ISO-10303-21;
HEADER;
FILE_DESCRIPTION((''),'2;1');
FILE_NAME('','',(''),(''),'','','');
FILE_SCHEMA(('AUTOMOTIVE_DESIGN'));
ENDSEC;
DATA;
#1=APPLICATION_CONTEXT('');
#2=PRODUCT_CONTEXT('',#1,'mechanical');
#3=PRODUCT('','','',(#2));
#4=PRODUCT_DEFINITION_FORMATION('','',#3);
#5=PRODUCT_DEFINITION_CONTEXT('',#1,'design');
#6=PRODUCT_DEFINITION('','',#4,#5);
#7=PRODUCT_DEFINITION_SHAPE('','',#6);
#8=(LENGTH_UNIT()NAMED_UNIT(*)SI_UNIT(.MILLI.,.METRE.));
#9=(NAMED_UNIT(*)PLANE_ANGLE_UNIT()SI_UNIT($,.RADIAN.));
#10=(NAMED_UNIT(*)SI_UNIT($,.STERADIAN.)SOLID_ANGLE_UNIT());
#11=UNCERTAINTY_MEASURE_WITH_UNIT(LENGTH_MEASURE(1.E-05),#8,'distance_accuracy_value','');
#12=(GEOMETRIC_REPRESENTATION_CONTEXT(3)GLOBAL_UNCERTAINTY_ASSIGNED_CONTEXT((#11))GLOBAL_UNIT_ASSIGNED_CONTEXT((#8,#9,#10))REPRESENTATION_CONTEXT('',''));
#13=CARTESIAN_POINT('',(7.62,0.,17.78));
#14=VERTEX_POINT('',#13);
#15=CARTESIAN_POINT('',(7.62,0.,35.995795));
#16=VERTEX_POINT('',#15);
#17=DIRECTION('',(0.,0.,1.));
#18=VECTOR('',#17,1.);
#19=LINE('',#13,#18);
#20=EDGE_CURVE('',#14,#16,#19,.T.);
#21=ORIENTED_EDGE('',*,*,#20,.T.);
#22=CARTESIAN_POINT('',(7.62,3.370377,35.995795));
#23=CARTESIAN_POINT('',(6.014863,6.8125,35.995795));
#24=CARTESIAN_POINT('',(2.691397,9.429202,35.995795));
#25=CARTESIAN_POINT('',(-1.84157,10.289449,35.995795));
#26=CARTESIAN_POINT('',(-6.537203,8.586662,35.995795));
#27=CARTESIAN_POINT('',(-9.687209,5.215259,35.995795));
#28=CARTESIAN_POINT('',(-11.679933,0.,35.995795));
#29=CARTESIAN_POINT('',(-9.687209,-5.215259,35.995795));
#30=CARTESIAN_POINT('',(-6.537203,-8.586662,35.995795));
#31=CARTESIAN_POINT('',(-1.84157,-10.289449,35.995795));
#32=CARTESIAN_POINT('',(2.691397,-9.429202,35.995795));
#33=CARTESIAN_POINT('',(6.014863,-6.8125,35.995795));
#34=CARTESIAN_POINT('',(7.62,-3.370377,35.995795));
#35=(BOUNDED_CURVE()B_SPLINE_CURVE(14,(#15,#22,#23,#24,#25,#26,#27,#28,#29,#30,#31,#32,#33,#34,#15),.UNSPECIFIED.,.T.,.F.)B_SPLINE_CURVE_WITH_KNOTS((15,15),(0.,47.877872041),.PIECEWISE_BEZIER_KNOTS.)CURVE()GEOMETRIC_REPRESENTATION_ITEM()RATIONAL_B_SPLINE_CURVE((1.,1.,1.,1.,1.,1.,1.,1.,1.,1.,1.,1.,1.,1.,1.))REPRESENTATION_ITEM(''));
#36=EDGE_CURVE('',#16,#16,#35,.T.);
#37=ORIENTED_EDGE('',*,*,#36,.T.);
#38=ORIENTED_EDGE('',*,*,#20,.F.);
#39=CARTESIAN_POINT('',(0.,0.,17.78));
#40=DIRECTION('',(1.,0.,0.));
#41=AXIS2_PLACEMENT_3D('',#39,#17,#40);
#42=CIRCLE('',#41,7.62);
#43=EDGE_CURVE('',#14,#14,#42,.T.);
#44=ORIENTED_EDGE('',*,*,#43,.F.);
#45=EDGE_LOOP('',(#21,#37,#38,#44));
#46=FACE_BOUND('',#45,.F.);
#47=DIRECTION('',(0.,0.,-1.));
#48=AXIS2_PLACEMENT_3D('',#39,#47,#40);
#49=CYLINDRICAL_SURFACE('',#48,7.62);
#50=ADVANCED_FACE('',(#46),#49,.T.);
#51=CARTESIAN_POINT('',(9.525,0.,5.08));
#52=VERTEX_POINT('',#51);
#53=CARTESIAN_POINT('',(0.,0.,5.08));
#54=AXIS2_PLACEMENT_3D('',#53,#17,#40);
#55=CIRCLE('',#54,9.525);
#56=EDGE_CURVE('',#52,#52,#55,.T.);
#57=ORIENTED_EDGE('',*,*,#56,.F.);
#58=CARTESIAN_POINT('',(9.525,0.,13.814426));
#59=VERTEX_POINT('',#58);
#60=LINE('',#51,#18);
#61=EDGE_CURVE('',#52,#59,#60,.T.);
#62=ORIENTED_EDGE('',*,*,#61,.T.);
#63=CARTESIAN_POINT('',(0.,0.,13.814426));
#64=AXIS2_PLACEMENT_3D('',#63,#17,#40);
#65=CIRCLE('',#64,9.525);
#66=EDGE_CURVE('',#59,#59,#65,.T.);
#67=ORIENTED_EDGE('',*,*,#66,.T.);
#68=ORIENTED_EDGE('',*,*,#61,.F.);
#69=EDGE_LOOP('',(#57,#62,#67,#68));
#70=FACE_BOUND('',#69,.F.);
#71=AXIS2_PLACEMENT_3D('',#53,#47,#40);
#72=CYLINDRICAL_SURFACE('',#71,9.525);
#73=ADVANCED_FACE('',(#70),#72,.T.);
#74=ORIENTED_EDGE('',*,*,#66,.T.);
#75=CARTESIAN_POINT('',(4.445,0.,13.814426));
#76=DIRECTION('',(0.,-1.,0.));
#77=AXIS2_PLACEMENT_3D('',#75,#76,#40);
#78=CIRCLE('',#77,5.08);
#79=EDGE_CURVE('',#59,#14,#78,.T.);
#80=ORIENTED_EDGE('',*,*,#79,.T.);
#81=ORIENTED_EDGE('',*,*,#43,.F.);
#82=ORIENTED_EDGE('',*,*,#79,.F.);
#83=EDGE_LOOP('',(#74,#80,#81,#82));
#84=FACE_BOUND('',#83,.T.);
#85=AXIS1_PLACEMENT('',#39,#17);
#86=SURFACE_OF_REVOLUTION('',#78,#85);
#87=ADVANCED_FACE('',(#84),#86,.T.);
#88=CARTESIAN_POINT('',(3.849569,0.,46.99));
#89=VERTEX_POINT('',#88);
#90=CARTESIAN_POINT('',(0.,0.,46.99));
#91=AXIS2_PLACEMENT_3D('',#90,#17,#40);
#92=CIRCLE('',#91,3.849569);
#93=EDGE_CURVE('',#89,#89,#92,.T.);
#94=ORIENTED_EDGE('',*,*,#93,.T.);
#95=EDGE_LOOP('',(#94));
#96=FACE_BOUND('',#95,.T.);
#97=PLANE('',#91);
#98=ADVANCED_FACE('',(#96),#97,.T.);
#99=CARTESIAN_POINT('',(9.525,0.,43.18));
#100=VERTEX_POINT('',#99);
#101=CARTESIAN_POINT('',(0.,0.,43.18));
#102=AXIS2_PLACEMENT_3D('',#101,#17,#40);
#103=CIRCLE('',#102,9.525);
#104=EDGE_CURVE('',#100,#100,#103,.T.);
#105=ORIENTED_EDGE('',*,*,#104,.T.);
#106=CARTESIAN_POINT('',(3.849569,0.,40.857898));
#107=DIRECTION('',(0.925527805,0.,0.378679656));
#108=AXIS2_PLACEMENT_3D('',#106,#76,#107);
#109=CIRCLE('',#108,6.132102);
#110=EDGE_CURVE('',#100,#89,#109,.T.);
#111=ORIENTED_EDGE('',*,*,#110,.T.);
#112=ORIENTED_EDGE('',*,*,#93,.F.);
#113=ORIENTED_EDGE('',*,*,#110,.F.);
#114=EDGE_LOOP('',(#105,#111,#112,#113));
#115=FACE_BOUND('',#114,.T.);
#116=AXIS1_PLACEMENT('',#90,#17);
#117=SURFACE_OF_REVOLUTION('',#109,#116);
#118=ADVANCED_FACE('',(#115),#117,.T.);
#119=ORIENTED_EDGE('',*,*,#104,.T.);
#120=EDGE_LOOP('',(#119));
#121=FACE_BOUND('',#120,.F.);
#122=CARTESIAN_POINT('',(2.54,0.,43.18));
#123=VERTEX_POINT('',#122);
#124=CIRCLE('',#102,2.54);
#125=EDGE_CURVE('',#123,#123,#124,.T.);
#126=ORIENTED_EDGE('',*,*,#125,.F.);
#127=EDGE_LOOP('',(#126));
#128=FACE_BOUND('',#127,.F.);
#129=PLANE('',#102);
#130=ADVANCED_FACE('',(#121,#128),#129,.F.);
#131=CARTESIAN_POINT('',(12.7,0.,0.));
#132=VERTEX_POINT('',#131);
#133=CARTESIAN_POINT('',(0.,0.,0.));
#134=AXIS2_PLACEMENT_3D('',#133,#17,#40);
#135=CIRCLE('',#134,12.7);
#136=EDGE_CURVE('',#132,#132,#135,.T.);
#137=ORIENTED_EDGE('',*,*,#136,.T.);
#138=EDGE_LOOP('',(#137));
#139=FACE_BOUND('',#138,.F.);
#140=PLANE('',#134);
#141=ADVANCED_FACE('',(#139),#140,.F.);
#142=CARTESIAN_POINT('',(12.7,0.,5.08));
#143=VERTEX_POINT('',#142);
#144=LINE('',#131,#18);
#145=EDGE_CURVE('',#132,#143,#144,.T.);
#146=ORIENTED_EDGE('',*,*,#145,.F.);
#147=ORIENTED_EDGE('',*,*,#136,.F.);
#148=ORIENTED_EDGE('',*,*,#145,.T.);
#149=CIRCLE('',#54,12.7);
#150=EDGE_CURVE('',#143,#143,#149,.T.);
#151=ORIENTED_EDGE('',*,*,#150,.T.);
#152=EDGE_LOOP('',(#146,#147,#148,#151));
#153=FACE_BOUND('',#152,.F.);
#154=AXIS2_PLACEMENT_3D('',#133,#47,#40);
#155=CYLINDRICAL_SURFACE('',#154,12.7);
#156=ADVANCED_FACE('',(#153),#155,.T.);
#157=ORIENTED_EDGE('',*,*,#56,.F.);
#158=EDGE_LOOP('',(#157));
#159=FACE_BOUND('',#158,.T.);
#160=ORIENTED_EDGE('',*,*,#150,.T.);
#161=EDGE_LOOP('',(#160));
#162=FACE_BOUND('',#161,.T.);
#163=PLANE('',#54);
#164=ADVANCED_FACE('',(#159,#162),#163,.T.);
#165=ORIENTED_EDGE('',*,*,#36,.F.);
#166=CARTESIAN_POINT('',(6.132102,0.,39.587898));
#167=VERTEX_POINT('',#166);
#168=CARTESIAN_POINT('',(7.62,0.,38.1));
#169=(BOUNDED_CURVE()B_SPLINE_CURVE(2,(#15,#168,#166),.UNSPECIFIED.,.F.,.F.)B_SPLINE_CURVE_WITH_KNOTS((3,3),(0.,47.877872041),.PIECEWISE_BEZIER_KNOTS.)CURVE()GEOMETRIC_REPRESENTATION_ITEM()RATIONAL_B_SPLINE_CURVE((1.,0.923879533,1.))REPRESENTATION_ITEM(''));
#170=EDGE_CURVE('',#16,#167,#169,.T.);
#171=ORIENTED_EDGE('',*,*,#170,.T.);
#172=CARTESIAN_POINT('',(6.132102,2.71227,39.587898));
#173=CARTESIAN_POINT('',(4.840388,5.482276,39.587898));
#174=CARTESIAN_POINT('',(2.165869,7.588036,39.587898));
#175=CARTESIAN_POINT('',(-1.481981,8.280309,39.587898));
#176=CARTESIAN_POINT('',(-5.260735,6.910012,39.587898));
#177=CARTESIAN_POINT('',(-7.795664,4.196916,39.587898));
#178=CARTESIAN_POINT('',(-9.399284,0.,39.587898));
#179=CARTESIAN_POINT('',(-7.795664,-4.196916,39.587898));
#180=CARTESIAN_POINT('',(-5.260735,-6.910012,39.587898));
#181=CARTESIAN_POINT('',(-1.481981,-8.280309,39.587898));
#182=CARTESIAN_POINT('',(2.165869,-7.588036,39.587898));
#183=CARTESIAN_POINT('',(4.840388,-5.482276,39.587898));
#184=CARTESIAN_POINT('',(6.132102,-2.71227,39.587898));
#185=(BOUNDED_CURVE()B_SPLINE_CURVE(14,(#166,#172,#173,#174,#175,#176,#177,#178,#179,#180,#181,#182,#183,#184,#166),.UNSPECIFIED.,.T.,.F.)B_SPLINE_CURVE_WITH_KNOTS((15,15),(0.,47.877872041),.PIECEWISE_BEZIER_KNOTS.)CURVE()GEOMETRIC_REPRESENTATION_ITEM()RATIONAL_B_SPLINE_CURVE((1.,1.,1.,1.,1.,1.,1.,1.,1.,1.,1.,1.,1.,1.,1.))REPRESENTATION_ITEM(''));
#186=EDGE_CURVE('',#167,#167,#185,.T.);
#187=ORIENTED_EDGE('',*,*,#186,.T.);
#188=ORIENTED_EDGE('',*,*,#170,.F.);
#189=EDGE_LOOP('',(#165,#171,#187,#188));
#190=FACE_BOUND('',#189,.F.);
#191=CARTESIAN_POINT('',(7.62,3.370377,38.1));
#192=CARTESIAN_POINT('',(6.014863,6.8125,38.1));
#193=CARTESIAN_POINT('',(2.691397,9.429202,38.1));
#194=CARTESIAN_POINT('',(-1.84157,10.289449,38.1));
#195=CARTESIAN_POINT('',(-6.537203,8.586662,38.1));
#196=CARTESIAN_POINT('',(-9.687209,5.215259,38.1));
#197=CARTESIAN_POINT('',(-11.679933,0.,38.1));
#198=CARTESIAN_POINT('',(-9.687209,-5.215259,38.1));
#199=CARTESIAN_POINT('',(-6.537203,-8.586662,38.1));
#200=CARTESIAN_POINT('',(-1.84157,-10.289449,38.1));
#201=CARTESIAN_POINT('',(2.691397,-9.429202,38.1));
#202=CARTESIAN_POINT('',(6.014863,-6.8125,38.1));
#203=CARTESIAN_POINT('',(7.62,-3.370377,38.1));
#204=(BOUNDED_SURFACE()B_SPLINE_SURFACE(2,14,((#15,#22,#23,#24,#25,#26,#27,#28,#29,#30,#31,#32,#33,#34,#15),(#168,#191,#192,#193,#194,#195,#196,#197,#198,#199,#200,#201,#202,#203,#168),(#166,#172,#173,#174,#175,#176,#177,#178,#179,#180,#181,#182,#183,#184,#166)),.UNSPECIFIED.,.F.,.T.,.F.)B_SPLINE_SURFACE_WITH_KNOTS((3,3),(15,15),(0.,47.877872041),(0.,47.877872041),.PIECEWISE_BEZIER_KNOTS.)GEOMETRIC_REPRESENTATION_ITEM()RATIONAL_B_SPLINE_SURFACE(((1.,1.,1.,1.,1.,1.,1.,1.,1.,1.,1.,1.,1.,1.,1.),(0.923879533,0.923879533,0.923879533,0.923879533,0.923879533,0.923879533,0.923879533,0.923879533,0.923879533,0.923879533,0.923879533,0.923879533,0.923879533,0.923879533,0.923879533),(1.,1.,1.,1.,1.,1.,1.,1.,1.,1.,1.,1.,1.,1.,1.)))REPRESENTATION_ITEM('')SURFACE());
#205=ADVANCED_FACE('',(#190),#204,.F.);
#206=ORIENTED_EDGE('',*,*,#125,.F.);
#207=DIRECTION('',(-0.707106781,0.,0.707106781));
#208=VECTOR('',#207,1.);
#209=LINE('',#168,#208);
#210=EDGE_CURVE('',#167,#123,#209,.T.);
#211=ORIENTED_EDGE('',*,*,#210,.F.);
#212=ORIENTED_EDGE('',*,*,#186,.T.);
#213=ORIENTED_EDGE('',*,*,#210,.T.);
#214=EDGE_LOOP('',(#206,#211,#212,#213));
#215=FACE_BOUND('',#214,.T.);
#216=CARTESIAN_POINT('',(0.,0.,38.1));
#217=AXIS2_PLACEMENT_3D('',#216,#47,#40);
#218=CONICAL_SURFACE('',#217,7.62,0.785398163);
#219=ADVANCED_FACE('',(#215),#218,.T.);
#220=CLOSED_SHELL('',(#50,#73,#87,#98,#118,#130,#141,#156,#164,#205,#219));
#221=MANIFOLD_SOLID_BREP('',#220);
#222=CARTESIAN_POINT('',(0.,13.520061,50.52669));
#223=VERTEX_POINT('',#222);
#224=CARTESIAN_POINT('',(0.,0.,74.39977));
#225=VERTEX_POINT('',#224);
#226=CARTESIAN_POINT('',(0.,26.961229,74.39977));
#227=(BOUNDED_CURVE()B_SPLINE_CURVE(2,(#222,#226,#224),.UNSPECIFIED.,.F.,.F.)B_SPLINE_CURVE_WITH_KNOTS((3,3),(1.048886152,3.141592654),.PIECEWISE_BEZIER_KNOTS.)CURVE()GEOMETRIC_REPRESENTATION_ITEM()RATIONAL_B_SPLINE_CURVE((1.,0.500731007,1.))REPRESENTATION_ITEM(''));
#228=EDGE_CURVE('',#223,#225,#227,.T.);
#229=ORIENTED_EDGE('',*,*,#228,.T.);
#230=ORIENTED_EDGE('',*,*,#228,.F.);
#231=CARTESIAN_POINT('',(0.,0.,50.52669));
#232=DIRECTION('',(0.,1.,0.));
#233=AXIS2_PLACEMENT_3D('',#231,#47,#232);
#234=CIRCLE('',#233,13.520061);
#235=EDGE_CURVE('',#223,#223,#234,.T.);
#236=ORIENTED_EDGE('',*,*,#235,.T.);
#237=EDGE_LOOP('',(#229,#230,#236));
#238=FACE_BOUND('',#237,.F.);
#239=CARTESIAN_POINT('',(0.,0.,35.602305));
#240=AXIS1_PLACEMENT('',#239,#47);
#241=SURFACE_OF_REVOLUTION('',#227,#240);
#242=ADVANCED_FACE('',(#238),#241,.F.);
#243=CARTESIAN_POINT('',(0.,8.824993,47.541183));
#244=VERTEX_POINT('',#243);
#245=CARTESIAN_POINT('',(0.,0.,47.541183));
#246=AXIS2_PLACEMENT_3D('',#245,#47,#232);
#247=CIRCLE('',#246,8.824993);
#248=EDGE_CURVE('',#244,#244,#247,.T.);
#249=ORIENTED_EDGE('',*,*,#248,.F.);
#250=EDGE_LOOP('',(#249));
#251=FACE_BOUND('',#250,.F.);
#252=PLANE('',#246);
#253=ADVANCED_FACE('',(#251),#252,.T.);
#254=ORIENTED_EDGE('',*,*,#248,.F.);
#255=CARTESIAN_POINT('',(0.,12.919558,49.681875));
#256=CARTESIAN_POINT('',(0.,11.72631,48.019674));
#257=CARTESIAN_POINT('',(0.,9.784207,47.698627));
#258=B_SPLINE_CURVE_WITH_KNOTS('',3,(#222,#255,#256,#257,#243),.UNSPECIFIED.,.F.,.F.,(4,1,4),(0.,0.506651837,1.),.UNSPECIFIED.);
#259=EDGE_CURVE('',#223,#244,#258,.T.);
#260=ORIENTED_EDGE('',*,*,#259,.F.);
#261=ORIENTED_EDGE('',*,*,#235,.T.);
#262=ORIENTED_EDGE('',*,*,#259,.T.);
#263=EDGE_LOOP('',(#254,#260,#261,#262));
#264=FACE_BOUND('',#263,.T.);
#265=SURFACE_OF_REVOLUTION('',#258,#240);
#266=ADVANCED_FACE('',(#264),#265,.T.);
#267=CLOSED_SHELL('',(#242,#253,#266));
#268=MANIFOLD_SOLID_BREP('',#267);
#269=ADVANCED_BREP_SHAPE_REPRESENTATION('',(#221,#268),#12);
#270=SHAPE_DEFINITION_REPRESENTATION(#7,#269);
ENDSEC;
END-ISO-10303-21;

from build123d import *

# Parameters (mm, degrees)
F0_R      = 12.7
F1_DEPTH  = 5.08
F2_R      = 9.525
F3_DEPTH  = 12.7
F4_R      = 7.62
F5_DEPTH  = 25.4
F7_SIZE   = 5.08
F8_R      = 5.08
F9_R      = 9.525
F10_DEPTH = 3.81


# Not quite as in the source:
# - a fillet or chamfer that OpenCascade refuses, or shapes differently, is made with other operations: its cross-section is extruded or revolved along the edge and cut away or added


with BuildPart() as f1:
    # F0 (on Top) → F1 (new body)
    with BuildSketch(Plane.XY):
        Circle(F0_R)
    extrude(amount=F1_DEPTH)

    # F2 (on face) → F3 (join)
    with BuildSketch(Plane.XY.offset(5.08)):
        Circle(F2_R)
    extrude(amount=F3_DEPTH)

    # F4 (on face) → F5 (join)
    with BuildSketch(Plane.XY.offset(17.78)):
        Circle(F4_R)
    extrude(amount=F5_DEPTH)

    # F6: fillet of radius 5.08 on 1 edges, made by hand

    # F6_s1 → F6_t2 (revolve, cut)
    with BuildSketch(Plane.XZ):
        with BuildLine():
            ThreePointArc((9.525, 13.814426271), (9.0240501198, 16.0141307966), (7.62, 17.78))
            Line((7.62, 17.78), (9.525, 17.78))
            Line((9.525, 17.78), (9.525, 13.814426271))
        make_face()
    revolve(axis=Axis((0, 0, 17.78), (0, 0, 1)), mode=Mode.SUBTRACT)

    # F7
    f7_edges = [f1.edges().sort_by_distance(p)[0] for p in [
        (-7.62, 0, 43.18),
    ]]
    chamfer(f7_edges, length=F7_SIZE)

    # F8
    f8_edges = [f1.edges().sort_by_distance(p)[0] for p in [
        (-7.62, 0, 38.1),
    ]]
    fillet(f8_edges, radius=F8_R)

    # F9 (on face) → F10 (join)
    with BuildSketch(Plane.XY.offset(43.18)):
        Circle(F9_R)
    extrude(amount=F10_DEPTH)

    # F11: fillet of radius 6.1321024484 on 1 edges, made by hand

    # F11_s1 → F11_t2 (revolve, cut)
    with BuildSketch(Plane.XZ):
        with BuildLine():
            ThreePointArc((9.525, 43.18), (7.2674123234, 45.9491670665), (3.849568681, 46.99))
            Line((3.849568681, 46.99), (9.525, 46.99))
            Line((9.525, 46.99), (9.525, 43.18))
        make_face()
    revolve(axis=Axis((0, 0, 46.99), (0, 0, 1)), mode=Mode.SUBTRACT)


with BuildPart() as f13:
    # F12 (on Right) → F13 (revolve)
    with BuildSketch(Plane.YZ):
        with BuildLine():
            Line((0, 74.3997703671), (0, 47.5411827339))
            Line((0, 47.5411827339), (8.8249929249, 47.5411827339))
            add(Edge.make_bspline(
                [(13.5200609776, 50.5266902082), (12.9195581094, 49.6818747529), (11.726310154, 48.0196735533), (9.7842070151, 47.6986270543), (8.8249929249, 47.5411827339)],
                knots=[0, 0, 0, 0, 0.5066518371, 1, 1, 1, 1], degree=3))
            add(Edge.make_bspline(
                [(13.5200609776, 50.5266902082), (26.9612288802, 74.3997703671), (0, 74.3997703671)],
                knots=[1.0488861525, 1.0488861525, 1.0488861525, 3.1415926536, 3.1415926536, 3.1415926536], degree=2, weights=[1, 0.5007310075, 1]))
        make_face()
    revolve(axis=Axis((0, 0, 35.6023046188), (0, 0, -1)))


solid = Compound([f1.part, f13.part])
